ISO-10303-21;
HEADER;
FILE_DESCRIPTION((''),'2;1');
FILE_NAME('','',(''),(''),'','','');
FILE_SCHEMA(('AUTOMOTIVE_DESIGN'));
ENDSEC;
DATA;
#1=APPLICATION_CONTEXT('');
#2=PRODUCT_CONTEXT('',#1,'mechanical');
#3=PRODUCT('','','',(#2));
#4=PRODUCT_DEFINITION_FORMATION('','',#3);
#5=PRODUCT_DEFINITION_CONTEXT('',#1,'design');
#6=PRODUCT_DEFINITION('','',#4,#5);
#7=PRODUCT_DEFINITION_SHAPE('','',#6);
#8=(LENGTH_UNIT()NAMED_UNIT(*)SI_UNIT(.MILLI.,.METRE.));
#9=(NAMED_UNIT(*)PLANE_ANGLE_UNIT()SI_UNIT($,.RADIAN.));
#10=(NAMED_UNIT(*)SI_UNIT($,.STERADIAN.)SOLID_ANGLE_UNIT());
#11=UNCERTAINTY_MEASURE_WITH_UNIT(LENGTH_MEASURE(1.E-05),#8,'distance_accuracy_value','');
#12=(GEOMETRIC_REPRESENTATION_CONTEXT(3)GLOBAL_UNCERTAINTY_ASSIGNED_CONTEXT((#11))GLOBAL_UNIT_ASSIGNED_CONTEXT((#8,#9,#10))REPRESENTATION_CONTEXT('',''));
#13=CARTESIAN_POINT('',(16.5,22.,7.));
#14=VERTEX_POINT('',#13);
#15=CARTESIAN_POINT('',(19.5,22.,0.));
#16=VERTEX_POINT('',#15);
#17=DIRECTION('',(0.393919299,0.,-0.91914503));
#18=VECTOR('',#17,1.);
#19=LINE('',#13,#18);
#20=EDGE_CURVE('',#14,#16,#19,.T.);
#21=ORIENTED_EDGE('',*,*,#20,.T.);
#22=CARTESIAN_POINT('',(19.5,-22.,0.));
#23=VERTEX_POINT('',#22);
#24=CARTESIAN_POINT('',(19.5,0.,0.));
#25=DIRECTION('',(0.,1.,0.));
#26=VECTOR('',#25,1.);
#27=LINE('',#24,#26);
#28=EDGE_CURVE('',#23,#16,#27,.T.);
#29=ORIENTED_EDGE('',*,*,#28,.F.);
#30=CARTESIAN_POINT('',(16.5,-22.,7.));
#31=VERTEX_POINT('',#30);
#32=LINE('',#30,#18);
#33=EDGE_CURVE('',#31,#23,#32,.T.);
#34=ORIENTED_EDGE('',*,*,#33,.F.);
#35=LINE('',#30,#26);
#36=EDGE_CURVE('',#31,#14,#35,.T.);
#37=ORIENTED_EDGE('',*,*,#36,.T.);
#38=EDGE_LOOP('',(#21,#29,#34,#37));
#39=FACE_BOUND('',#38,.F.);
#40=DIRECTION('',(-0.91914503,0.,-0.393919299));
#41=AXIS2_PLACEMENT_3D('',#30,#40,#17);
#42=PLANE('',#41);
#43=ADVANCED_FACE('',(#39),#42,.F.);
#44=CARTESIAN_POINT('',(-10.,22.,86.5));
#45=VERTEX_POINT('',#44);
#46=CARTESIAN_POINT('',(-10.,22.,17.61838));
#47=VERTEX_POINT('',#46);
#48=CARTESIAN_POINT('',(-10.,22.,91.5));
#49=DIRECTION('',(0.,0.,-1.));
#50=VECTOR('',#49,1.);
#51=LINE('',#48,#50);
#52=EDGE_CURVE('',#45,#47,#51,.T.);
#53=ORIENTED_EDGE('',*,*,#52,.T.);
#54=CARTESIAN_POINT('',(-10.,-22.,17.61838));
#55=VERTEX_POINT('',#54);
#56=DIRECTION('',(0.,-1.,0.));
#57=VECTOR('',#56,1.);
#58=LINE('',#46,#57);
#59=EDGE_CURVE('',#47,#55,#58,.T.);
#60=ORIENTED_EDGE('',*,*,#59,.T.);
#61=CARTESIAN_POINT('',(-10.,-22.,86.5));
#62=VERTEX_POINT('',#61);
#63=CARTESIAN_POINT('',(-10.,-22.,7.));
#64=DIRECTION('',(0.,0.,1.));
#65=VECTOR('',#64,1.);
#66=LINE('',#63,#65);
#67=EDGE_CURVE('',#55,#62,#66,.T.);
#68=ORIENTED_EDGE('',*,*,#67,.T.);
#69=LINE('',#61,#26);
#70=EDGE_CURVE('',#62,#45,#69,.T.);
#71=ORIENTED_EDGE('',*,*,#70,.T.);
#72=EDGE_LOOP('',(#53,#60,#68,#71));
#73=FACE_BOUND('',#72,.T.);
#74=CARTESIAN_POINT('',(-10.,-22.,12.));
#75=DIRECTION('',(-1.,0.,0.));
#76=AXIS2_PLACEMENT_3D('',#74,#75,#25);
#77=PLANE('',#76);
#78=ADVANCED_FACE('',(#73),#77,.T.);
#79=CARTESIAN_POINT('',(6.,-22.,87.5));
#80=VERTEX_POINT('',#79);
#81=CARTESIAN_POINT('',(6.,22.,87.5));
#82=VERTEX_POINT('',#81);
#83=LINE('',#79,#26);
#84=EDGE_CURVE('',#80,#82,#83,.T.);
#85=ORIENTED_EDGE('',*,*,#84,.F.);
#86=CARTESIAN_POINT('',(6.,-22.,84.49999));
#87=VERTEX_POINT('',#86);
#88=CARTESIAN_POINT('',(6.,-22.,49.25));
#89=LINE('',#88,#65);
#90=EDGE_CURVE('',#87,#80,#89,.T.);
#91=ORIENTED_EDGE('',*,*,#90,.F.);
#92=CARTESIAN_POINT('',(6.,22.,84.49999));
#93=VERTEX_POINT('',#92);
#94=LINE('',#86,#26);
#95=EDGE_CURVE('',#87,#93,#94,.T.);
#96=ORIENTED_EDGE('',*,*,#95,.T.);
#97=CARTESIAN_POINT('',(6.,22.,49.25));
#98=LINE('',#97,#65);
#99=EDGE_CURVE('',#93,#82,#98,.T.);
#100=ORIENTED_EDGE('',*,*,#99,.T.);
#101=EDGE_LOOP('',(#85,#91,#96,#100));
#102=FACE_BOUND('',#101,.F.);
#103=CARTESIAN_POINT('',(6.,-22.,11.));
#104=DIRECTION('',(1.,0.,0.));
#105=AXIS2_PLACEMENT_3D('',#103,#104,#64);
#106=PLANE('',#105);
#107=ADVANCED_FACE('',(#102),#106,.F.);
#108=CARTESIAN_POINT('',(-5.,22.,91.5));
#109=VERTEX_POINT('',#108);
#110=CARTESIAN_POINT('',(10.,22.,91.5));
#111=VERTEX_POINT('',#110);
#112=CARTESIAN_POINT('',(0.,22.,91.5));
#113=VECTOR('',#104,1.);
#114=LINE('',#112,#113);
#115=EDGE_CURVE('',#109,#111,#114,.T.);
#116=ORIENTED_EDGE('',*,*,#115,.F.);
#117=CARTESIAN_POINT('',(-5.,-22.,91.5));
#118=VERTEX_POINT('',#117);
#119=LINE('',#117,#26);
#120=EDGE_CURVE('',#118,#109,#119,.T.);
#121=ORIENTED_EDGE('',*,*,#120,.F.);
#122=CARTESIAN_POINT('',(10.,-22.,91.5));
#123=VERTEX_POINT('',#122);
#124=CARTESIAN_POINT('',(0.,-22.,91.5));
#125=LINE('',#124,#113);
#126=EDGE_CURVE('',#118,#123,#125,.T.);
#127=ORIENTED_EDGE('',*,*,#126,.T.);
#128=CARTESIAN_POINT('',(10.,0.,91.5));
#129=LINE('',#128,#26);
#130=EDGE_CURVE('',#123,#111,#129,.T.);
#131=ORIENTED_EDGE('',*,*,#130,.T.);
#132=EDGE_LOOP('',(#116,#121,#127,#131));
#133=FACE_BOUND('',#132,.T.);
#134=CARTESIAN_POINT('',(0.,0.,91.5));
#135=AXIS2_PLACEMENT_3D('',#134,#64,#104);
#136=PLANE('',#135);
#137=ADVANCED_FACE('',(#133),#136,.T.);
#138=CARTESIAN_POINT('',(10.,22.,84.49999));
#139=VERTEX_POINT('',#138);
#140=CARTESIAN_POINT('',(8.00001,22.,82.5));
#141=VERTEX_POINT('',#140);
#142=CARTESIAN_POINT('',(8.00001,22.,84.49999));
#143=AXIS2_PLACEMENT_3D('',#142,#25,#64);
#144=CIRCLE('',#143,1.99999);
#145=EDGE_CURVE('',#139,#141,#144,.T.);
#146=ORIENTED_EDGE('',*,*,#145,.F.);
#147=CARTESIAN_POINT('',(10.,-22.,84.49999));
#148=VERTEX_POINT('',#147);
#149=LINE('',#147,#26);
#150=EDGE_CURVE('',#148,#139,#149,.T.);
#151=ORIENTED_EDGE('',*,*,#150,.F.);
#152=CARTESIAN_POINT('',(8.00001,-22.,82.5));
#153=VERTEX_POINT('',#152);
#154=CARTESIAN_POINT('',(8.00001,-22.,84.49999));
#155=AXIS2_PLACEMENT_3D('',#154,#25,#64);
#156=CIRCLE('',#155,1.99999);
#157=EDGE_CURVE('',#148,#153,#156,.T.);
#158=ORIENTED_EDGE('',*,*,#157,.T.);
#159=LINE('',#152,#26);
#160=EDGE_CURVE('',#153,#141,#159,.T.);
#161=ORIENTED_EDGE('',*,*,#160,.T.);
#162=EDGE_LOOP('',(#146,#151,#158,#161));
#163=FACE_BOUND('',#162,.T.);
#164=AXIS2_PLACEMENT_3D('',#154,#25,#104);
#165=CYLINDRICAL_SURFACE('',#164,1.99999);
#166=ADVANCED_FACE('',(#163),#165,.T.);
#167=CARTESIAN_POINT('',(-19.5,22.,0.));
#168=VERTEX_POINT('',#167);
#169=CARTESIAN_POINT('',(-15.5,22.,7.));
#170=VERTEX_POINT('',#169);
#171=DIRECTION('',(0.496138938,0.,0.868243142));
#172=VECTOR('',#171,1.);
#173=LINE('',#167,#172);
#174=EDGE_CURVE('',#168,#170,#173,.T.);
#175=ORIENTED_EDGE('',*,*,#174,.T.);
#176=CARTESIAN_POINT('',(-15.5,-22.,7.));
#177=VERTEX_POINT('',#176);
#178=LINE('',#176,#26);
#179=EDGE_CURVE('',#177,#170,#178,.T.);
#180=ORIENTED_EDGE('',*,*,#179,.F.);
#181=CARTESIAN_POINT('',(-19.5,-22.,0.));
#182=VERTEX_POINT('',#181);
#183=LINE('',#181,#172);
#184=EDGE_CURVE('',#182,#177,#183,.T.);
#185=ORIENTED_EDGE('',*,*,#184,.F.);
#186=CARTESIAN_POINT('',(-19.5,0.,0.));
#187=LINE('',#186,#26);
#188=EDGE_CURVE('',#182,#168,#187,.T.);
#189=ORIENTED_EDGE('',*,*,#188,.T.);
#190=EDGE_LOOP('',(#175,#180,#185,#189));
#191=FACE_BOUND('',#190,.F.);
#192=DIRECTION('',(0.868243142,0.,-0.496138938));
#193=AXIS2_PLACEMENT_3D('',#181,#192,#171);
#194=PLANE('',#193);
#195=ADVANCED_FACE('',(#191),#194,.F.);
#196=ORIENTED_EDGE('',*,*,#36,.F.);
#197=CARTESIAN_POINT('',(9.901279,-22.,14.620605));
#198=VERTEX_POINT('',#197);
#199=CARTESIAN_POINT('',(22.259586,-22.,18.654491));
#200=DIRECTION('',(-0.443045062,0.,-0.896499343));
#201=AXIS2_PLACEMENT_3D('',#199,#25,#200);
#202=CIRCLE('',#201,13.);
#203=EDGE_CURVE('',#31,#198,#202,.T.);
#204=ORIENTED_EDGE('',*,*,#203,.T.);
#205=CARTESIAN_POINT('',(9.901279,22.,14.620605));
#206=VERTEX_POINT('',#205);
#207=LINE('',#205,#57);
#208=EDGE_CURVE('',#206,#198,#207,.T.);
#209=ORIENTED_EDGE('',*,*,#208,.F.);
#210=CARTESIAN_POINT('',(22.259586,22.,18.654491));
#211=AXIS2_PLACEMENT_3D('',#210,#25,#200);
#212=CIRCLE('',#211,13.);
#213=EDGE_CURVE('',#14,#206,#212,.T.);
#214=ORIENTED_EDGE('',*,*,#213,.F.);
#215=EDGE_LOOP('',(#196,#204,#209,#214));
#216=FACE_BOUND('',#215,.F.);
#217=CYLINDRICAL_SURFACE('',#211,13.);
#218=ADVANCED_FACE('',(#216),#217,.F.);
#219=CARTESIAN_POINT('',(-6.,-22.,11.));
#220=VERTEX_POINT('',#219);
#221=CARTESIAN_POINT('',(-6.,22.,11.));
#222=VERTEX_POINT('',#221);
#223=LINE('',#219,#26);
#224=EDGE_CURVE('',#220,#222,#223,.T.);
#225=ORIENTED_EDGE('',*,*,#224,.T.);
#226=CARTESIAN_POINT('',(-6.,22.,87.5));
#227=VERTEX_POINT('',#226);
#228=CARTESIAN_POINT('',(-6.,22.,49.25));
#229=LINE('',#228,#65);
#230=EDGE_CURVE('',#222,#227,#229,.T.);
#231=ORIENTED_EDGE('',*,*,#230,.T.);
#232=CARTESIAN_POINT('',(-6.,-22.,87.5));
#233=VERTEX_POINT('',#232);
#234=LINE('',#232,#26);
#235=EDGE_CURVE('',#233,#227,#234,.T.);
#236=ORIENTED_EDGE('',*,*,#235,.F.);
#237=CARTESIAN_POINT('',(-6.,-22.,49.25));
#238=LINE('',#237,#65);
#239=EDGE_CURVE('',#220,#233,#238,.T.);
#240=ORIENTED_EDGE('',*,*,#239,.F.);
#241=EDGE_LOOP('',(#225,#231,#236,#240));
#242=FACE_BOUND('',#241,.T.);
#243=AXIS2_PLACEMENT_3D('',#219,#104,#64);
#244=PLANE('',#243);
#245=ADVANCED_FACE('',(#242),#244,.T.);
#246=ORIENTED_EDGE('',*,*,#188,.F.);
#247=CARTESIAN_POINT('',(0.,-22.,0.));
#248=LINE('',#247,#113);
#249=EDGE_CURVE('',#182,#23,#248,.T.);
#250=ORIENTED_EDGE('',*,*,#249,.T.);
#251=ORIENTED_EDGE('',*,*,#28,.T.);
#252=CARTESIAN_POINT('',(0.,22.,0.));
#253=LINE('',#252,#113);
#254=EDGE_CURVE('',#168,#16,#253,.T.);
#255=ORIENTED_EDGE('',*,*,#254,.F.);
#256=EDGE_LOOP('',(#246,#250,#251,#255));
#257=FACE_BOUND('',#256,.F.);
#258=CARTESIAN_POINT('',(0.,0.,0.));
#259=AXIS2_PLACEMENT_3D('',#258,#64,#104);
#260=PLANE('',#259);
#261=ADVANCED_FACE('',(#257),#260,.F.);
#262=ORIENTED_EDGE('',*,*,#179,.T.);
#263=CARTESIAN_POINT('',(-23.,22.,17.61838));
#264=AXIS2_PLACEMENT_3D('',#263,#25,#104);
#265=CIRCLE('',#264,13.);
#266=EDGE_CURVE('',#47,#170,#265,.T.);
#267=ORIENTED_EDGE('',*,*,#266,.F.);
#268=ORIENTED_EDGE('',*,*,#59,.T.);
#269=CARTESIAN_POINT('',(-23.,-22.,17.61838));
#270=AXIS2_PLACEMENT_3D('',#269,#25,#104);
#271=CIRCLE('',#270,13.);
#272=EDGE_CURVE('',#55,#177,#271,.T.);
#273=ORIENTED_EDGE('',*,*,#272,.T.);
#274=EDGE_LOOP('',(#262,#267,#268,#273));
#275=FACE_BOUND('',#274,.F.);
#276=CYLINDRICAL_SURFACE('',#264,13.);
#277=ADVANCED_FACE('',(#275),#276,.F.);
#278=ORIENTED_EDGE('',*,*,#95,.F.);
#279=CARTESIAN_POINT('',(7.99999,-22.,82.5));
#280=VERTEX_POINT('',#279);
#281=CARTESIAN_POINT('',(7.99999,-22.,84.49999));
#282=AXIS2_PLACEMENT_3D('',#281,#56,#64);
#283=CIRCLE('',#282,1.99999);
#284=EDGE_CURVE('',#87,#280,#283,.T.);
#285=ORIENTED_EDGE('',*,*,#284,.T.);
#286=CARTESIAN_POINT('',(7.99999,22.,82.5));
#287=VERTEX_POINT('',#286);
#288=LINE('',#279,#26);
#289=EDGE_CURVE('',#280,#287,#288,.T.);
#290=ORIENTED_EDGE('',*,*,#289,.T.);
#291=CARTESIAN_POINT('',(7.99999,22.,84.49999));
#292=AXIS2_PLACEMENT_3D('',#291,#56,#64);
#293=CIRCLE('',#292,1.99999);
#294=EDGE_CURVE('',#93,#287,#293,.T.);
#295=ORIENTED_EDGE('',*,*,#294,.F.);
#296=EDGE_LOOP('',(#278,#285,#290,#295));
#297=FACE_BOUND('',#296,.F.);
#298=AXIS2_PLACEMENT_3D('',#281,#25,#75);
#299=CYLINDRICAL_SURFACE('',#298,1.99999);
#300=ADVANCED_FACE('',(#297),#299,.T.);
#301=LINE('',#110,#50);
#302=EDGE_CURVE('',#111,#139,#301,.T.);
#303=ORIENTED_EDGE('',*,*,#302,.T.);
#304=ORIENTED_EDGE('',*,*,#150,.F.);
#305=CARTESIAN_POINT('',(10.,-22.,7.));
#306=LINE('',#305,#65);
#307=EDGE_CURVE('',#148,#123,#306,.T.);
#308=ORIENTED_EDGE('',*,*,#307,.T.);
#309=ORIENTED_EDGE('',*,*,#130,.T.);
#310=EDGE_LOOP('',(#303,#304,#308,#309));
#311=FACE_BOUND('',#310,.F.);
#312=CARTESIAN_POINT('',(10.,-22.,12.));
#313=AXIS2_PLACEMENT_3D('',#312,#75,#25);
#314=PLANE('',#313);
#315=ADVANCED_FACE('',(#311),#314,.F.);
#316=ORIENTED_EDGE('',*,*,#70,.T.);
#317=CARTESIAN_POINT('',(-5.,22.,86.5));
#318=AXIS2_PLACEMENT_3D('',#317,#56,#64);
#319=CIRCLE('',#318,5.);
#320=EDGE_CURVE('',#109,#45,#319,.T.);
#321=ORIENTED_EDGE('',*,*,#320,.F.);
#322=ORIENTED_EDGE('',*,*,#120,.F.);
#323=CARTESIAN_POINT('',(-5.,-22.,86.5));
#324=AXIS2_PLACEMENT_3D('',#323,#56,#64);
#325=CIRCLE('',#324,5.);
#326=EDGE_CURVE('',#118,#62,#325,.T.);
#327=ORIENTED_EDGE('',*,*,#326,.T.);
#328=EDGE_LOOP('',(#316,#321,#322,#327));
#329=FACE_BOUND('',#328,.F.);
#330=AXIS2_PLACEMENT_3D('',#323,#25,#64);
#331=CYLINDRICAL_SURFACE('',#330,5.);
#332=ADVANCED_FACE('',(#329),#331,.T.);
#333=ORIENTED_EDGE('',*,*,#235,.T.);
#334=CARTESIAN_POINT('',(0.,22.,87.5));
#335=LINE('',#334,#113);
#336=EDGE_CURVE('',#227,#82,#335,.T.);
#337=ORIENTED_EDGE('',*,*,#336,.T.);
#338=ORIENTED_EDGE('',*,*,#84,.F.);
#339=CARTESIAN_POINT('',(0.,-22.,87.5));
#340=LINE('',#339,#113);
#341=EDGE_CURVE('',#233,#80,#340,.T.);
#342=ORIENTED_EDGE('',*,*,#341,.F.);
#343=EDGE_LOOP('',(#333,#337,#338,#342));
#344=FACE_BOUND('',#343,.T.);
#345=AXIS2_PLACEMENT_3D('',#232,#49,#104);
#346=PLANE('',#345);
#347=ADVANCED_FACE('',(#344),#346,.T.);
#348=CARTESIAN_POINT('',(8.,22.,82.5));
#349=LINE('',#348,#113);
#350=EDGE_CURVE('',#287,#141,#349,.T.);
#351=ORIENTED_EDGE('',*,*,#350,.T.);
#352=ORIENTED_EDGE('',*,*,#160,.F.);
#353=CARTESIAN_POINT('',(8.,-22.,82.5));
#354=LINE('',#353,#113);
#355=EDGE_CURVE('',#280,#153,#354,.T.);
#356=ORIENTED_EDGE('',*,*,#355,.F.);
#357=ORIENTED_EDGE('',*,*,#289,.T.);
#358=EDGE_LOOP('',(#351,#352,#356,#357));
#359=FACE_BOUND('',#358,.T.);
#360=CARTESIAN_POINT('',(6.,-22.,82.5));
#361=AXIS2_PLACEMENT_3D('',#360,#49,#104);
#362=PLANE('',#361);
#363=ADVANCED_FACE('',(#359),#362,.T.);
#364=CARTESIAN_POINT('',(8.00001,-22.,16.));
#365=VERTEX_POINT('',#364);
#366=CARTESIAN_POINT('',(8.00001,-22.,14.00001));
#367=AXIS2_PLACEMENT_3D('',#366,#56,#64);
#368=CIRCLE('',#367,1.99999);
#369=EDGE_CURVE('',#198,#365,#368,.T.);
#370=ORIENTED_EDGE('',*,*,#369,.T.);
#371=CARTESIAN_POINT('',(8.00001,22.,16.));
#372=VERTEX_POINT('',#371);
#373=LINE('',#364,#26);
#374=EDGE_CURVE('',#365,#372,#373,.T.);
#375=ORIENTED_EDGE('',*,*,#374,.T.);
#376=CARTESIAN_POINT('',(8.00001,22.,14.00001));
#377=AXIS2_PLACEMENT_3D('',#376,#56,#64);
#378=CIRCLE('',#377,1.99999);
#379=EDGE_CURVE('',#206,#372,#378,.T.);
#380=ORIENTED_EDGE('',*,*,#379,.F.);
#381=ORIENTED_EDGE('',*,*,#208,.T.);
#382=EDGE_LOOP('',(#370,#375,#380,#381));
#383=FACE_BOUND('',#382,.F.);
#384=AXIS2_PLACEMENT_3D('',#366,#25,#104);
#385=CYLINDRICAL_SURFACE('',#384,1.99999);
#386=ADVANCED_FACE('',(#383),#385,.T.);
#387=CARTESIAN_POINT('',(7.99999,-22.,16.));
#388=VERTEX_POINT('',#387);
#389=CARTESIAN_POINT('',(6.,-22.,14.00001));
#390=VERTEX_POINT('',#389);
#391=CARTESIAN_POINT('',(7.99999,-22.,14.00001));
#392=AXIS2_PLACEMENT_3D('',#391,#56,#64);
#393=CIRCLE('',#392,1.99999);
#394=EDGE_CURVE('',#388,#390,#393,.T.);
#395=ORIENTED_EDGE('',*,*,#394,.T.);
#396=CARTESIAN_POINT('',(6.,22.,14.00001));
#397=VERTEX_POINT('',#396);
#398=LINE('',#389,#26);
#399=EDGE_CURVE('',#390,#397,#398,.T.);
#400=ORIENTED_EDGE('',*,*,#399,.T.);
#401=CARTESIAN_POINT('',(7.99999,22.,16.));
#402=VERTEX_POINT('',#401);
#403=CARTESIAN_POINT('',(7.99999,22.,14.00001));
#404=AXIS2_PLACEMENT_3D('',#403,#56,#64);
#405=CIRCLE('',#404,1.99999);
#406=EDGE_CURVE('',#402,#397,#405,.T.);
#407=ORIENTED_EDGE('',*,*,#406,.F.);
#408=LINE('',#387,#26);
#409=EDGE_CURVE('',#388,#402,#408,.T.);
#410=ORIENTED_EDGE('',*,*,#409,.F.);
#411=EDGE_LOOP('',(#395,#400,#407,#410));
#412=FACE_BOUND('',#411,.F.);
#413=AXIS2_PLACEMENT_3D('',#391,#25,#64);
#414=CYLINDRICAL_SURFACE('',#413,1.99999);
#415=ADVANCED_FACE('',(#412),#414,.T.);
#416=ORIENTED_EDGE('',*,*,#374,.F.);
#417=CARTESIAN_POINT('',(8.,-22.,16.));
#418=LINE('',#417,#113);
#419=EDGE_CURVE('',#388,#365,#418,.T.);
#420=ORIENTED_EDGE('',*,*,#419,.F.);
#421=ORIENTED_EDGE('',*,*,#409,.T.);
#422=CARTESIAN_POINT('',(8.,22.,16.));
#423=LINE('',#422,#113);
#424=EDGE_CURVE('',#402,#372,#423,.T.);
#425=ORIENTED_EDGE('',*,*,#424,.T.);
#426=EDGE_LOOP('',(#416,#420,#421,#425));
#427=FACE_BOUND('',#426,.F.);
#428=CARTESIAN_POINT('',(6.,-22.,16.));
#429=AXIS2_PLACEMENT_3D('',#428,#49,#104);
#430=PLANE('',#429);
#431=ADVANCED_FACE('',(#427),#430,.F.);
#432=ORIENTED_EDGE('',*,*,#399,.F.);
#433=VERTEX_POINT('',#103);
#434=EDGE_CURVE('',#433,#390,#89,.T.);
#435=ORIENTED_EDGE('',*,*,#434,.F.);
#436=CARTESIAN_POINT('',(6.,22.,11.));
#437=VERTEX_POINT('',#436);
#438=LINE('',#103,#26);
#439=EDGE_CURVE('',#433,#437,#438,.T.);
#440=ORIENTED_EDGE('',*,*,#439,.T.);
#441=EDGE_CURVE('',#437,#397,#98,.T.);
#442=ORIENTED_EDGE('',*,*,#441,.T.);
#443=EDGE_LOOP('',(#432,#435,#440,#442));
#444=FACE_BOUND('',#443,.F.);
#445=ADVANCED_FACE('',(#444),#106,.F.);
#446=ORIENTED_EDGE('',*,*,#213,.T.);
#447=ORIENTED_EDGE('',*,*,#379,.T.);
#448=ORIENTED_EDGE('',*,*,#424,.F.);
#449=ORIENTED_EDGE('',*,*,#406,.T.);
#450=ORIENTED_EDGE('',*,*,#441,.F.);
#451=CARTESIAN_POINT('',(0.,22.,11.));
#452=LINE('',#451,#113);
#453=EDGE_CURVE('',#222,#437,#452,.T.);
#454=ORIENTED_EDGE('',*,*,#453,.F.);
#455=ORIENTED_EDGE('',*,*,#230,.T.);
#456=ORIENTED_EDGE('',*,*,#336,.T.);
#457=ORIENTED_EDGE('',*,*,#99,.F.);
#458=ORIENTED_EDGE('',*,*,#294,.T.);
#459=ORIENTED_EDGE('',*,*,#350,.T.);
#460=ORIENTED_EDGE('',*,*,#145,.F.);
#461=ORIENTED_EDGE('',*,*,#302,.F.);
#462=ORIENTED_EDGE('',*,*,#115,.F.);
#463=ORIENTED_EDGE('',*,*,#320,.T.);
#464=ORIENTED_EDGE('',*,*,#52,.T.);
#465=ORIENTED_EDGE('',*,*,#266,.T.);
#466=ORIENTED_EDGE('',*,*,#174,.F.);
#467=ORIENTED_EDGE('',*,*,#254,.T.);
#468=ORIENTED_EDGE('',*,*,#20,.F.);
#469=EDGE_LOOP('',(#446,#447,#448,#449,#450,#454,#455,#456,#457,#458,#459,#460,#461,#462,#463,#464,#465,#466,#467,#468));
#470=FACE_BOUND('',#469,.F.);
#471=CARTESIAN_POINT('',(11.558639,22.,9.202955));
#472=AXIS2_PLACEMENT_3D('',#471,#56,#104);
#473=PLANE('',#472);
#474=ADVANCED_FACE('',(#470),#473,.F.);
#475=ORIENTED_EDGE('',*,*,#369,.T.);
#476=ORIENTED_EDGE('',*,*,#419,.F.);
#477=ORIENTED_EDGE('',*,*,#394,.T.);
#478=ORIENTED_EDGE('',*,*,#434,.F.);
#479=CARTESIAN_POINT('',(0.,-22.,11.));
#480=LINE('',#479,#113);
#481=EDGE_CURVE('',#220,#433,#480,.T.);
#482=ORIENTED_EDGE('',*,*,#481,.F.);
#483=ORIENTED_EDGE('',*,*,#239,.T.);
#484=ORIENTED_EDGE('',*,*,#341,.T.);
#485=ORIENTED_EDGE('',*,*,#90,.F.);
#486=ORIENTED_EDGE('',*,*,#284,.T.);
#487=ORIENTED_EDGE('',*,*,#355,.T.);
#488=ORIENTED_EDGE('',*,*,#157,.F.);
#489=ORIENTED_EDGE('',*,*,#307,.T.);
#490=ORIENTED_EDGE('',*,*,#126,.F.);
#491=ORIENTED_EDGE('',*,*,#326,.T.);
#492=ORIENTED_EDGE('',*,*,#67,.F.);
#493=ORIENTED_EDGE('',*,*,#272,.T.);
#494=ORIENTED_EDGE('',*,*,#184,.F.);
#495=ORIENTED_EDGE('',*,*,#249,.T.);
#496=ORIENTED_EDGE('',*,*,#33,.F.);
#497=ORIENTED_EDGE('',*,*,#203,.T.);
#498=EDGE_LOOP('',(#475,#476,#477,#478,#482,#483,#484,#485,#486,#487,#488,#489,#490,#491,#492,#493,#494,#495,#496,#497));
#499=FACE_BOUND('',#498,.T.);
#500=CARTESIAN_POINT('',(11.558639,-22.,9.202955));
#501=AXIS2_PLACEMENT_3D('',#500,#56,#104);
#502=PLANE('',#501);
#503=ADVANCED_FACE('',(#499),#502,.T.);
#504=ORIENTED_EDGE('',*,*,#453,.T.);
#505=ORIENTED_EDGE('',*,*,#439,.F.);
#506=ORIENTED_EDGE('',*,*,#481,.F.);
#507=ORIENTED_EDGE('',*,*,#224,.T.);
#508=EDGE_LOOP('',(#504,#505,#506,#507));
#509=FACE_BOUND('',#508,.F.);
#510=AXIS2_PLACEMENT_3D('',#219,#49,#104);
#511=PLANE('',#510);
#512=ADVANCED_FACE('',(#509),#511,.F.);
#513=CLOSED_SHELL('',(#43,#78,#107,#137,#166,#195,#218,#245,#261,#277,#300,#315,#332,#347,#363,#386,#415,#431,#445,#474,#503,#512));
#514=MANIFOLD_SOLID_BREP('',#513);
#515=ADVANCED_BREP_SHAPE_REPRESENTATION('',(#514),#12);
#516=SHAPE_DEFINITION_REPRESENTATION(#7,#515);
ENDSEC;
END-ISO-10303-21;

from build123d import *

# Parameters (mm, degrees)
F0_W         = 39
F0_H         = 44
F1_DEPTH     = 7
F3_DEPTH     = 44
F4_W         = 20
F4_H         = 44
F5_DEPTH     = 5
F6_W         = 20
F6_H         = 44
F7_DEPTH     = 79.5
F8_W         = 12
F8_H         = 76.5
F9_DEPTH     = 44
F10_W        = 4
F10_H        = 66.5
F11_DEPTH    = 44
F12_R        = 1.99999
F13_T1_DEPTH = 44
F14_R        = 5


# Not quite as in the source:
# - a fillet or chamfer that OpenCascade refuses, or shapes differently, is made with other operations: its cross-section is extruded or revolved along the edge and cut away or added
# - a fillet or chamfer is up to 0.001 mm smaller than in the source, because OpenCascade refuses the exact size


with BuildPart() as f1:
    # F0 (on Top) → F1 (new body)
    with BuildSketch(Plane.XY):
        Rectangle(F0_W, F0_H)
    extrude(amount=F1_DEPTH)

    # F2 (on face) → F3 (cut)
    with BuildSketch(Plane.XZ.offset(22)):
        Polygon((-19.5, 7), (-19.5, 0), (-15.5, 7), align=None)
        Polygon((16.5, 7), (19.5, 0), (19.5, 7), align=None)
    extrude(amount=-F3_DEPTH, mode=Mode.SUBTRACT)

    # F4 (on face) → F5 (join)
    with BuildSketch(Plane.XY.offset(7)):
        Rectangle(F4_W, F4_H)
    extrude(amount=F5_DEPTH)

    # F6 (on face) → F7 (join)
    with BuildSketch(Plane.XY.offset(12)):
        Rectangle(F6_W, F6_H)
    extrude(amount=F7_DEPTH)

    # F8 (on face) → F9 (cut)
    with BuildSketch(Plane.XZ.offset(22)):
        with Locations((0, 49.25)):
            Rectangle(F8_W, F8_H)
    extrude(amount=-F9_DEPTH, mode=Mode.SUBTRACT)

    # F10 (on face) → F11 (cut)
    with BuildSketch(Plane.XZ.offset(22)):
        with Locations((8, 49.25)):
            Rectangle(F10_W, F10_H)
    extrude(amount=-F11_DEPTH, mode=Mode.SUBTRACT)

    # F12 (radius 2 in the source; OpenCascade refuses exactly that, so slightly less here)
    f12_edges = [f1.edges().sort_by_distance(p)[0] for p in [
        (10, 0, 82.5),
        (6, 0, 16),
        (10, 0, 16),
        (6, 0, 82.5),
    ]]
    fillet(f12_edges, radius=F12_R)

    # F13: fillet of radius 13 on 2 edges, made by hand

    # F13_s2 → F13_t1 (join)
    with BuildSketch(Plane.XZ.offset(-22)):
        with BuildLine():
            ThreePointArc((16.5, 7), (12.4319250008, 10.1446687277), (9.9012785359, 14.6206048393))
            Line((9.9012785359, 14.6206048393), (8.6654478084, 14.2172161768))
            ThreePointArc((8.6654478084, 14.2172161768), (8.7, 14.00001), (8.7, 7))
            Line((8.7, 7), (10, 5.7))
            ThreePointArc((10, 5.7), (13.25, 5.7), (15.9240414189, 5.8345508536))
            Line((15.9240414189, 5.8345508536), (16.5, 7))
        make_face()
        with BuildLine():
            ThreePointArc((-10, 17.6183802908), (-11.4566036194, 11.6392499192), (-15.5, 7))
            Line((-15.5, 7), (-15.35, 6.7876323942))
            ThreePointArc((-15.35, 6.7876323942), (-12.75, 6.74), (-10, 6.74))
            Line((-10, 6.74), (-9.74, 7))
            Line((-9.74, 7), (-9.74, 17.6183802908))
            Line((-9.74, 17.6183802908), (-10, 17.6183802908))
        make_face()
    extrude(amount=F13_T1_DEPTH)

    # F14
    f14_edges = [f1.edges().sort_by_distance(p)[0] for p in [
        (-10, 0, 91.5),
    ]]
    fillet(f14_edges, radius=F14_R)


solid = f1.part
